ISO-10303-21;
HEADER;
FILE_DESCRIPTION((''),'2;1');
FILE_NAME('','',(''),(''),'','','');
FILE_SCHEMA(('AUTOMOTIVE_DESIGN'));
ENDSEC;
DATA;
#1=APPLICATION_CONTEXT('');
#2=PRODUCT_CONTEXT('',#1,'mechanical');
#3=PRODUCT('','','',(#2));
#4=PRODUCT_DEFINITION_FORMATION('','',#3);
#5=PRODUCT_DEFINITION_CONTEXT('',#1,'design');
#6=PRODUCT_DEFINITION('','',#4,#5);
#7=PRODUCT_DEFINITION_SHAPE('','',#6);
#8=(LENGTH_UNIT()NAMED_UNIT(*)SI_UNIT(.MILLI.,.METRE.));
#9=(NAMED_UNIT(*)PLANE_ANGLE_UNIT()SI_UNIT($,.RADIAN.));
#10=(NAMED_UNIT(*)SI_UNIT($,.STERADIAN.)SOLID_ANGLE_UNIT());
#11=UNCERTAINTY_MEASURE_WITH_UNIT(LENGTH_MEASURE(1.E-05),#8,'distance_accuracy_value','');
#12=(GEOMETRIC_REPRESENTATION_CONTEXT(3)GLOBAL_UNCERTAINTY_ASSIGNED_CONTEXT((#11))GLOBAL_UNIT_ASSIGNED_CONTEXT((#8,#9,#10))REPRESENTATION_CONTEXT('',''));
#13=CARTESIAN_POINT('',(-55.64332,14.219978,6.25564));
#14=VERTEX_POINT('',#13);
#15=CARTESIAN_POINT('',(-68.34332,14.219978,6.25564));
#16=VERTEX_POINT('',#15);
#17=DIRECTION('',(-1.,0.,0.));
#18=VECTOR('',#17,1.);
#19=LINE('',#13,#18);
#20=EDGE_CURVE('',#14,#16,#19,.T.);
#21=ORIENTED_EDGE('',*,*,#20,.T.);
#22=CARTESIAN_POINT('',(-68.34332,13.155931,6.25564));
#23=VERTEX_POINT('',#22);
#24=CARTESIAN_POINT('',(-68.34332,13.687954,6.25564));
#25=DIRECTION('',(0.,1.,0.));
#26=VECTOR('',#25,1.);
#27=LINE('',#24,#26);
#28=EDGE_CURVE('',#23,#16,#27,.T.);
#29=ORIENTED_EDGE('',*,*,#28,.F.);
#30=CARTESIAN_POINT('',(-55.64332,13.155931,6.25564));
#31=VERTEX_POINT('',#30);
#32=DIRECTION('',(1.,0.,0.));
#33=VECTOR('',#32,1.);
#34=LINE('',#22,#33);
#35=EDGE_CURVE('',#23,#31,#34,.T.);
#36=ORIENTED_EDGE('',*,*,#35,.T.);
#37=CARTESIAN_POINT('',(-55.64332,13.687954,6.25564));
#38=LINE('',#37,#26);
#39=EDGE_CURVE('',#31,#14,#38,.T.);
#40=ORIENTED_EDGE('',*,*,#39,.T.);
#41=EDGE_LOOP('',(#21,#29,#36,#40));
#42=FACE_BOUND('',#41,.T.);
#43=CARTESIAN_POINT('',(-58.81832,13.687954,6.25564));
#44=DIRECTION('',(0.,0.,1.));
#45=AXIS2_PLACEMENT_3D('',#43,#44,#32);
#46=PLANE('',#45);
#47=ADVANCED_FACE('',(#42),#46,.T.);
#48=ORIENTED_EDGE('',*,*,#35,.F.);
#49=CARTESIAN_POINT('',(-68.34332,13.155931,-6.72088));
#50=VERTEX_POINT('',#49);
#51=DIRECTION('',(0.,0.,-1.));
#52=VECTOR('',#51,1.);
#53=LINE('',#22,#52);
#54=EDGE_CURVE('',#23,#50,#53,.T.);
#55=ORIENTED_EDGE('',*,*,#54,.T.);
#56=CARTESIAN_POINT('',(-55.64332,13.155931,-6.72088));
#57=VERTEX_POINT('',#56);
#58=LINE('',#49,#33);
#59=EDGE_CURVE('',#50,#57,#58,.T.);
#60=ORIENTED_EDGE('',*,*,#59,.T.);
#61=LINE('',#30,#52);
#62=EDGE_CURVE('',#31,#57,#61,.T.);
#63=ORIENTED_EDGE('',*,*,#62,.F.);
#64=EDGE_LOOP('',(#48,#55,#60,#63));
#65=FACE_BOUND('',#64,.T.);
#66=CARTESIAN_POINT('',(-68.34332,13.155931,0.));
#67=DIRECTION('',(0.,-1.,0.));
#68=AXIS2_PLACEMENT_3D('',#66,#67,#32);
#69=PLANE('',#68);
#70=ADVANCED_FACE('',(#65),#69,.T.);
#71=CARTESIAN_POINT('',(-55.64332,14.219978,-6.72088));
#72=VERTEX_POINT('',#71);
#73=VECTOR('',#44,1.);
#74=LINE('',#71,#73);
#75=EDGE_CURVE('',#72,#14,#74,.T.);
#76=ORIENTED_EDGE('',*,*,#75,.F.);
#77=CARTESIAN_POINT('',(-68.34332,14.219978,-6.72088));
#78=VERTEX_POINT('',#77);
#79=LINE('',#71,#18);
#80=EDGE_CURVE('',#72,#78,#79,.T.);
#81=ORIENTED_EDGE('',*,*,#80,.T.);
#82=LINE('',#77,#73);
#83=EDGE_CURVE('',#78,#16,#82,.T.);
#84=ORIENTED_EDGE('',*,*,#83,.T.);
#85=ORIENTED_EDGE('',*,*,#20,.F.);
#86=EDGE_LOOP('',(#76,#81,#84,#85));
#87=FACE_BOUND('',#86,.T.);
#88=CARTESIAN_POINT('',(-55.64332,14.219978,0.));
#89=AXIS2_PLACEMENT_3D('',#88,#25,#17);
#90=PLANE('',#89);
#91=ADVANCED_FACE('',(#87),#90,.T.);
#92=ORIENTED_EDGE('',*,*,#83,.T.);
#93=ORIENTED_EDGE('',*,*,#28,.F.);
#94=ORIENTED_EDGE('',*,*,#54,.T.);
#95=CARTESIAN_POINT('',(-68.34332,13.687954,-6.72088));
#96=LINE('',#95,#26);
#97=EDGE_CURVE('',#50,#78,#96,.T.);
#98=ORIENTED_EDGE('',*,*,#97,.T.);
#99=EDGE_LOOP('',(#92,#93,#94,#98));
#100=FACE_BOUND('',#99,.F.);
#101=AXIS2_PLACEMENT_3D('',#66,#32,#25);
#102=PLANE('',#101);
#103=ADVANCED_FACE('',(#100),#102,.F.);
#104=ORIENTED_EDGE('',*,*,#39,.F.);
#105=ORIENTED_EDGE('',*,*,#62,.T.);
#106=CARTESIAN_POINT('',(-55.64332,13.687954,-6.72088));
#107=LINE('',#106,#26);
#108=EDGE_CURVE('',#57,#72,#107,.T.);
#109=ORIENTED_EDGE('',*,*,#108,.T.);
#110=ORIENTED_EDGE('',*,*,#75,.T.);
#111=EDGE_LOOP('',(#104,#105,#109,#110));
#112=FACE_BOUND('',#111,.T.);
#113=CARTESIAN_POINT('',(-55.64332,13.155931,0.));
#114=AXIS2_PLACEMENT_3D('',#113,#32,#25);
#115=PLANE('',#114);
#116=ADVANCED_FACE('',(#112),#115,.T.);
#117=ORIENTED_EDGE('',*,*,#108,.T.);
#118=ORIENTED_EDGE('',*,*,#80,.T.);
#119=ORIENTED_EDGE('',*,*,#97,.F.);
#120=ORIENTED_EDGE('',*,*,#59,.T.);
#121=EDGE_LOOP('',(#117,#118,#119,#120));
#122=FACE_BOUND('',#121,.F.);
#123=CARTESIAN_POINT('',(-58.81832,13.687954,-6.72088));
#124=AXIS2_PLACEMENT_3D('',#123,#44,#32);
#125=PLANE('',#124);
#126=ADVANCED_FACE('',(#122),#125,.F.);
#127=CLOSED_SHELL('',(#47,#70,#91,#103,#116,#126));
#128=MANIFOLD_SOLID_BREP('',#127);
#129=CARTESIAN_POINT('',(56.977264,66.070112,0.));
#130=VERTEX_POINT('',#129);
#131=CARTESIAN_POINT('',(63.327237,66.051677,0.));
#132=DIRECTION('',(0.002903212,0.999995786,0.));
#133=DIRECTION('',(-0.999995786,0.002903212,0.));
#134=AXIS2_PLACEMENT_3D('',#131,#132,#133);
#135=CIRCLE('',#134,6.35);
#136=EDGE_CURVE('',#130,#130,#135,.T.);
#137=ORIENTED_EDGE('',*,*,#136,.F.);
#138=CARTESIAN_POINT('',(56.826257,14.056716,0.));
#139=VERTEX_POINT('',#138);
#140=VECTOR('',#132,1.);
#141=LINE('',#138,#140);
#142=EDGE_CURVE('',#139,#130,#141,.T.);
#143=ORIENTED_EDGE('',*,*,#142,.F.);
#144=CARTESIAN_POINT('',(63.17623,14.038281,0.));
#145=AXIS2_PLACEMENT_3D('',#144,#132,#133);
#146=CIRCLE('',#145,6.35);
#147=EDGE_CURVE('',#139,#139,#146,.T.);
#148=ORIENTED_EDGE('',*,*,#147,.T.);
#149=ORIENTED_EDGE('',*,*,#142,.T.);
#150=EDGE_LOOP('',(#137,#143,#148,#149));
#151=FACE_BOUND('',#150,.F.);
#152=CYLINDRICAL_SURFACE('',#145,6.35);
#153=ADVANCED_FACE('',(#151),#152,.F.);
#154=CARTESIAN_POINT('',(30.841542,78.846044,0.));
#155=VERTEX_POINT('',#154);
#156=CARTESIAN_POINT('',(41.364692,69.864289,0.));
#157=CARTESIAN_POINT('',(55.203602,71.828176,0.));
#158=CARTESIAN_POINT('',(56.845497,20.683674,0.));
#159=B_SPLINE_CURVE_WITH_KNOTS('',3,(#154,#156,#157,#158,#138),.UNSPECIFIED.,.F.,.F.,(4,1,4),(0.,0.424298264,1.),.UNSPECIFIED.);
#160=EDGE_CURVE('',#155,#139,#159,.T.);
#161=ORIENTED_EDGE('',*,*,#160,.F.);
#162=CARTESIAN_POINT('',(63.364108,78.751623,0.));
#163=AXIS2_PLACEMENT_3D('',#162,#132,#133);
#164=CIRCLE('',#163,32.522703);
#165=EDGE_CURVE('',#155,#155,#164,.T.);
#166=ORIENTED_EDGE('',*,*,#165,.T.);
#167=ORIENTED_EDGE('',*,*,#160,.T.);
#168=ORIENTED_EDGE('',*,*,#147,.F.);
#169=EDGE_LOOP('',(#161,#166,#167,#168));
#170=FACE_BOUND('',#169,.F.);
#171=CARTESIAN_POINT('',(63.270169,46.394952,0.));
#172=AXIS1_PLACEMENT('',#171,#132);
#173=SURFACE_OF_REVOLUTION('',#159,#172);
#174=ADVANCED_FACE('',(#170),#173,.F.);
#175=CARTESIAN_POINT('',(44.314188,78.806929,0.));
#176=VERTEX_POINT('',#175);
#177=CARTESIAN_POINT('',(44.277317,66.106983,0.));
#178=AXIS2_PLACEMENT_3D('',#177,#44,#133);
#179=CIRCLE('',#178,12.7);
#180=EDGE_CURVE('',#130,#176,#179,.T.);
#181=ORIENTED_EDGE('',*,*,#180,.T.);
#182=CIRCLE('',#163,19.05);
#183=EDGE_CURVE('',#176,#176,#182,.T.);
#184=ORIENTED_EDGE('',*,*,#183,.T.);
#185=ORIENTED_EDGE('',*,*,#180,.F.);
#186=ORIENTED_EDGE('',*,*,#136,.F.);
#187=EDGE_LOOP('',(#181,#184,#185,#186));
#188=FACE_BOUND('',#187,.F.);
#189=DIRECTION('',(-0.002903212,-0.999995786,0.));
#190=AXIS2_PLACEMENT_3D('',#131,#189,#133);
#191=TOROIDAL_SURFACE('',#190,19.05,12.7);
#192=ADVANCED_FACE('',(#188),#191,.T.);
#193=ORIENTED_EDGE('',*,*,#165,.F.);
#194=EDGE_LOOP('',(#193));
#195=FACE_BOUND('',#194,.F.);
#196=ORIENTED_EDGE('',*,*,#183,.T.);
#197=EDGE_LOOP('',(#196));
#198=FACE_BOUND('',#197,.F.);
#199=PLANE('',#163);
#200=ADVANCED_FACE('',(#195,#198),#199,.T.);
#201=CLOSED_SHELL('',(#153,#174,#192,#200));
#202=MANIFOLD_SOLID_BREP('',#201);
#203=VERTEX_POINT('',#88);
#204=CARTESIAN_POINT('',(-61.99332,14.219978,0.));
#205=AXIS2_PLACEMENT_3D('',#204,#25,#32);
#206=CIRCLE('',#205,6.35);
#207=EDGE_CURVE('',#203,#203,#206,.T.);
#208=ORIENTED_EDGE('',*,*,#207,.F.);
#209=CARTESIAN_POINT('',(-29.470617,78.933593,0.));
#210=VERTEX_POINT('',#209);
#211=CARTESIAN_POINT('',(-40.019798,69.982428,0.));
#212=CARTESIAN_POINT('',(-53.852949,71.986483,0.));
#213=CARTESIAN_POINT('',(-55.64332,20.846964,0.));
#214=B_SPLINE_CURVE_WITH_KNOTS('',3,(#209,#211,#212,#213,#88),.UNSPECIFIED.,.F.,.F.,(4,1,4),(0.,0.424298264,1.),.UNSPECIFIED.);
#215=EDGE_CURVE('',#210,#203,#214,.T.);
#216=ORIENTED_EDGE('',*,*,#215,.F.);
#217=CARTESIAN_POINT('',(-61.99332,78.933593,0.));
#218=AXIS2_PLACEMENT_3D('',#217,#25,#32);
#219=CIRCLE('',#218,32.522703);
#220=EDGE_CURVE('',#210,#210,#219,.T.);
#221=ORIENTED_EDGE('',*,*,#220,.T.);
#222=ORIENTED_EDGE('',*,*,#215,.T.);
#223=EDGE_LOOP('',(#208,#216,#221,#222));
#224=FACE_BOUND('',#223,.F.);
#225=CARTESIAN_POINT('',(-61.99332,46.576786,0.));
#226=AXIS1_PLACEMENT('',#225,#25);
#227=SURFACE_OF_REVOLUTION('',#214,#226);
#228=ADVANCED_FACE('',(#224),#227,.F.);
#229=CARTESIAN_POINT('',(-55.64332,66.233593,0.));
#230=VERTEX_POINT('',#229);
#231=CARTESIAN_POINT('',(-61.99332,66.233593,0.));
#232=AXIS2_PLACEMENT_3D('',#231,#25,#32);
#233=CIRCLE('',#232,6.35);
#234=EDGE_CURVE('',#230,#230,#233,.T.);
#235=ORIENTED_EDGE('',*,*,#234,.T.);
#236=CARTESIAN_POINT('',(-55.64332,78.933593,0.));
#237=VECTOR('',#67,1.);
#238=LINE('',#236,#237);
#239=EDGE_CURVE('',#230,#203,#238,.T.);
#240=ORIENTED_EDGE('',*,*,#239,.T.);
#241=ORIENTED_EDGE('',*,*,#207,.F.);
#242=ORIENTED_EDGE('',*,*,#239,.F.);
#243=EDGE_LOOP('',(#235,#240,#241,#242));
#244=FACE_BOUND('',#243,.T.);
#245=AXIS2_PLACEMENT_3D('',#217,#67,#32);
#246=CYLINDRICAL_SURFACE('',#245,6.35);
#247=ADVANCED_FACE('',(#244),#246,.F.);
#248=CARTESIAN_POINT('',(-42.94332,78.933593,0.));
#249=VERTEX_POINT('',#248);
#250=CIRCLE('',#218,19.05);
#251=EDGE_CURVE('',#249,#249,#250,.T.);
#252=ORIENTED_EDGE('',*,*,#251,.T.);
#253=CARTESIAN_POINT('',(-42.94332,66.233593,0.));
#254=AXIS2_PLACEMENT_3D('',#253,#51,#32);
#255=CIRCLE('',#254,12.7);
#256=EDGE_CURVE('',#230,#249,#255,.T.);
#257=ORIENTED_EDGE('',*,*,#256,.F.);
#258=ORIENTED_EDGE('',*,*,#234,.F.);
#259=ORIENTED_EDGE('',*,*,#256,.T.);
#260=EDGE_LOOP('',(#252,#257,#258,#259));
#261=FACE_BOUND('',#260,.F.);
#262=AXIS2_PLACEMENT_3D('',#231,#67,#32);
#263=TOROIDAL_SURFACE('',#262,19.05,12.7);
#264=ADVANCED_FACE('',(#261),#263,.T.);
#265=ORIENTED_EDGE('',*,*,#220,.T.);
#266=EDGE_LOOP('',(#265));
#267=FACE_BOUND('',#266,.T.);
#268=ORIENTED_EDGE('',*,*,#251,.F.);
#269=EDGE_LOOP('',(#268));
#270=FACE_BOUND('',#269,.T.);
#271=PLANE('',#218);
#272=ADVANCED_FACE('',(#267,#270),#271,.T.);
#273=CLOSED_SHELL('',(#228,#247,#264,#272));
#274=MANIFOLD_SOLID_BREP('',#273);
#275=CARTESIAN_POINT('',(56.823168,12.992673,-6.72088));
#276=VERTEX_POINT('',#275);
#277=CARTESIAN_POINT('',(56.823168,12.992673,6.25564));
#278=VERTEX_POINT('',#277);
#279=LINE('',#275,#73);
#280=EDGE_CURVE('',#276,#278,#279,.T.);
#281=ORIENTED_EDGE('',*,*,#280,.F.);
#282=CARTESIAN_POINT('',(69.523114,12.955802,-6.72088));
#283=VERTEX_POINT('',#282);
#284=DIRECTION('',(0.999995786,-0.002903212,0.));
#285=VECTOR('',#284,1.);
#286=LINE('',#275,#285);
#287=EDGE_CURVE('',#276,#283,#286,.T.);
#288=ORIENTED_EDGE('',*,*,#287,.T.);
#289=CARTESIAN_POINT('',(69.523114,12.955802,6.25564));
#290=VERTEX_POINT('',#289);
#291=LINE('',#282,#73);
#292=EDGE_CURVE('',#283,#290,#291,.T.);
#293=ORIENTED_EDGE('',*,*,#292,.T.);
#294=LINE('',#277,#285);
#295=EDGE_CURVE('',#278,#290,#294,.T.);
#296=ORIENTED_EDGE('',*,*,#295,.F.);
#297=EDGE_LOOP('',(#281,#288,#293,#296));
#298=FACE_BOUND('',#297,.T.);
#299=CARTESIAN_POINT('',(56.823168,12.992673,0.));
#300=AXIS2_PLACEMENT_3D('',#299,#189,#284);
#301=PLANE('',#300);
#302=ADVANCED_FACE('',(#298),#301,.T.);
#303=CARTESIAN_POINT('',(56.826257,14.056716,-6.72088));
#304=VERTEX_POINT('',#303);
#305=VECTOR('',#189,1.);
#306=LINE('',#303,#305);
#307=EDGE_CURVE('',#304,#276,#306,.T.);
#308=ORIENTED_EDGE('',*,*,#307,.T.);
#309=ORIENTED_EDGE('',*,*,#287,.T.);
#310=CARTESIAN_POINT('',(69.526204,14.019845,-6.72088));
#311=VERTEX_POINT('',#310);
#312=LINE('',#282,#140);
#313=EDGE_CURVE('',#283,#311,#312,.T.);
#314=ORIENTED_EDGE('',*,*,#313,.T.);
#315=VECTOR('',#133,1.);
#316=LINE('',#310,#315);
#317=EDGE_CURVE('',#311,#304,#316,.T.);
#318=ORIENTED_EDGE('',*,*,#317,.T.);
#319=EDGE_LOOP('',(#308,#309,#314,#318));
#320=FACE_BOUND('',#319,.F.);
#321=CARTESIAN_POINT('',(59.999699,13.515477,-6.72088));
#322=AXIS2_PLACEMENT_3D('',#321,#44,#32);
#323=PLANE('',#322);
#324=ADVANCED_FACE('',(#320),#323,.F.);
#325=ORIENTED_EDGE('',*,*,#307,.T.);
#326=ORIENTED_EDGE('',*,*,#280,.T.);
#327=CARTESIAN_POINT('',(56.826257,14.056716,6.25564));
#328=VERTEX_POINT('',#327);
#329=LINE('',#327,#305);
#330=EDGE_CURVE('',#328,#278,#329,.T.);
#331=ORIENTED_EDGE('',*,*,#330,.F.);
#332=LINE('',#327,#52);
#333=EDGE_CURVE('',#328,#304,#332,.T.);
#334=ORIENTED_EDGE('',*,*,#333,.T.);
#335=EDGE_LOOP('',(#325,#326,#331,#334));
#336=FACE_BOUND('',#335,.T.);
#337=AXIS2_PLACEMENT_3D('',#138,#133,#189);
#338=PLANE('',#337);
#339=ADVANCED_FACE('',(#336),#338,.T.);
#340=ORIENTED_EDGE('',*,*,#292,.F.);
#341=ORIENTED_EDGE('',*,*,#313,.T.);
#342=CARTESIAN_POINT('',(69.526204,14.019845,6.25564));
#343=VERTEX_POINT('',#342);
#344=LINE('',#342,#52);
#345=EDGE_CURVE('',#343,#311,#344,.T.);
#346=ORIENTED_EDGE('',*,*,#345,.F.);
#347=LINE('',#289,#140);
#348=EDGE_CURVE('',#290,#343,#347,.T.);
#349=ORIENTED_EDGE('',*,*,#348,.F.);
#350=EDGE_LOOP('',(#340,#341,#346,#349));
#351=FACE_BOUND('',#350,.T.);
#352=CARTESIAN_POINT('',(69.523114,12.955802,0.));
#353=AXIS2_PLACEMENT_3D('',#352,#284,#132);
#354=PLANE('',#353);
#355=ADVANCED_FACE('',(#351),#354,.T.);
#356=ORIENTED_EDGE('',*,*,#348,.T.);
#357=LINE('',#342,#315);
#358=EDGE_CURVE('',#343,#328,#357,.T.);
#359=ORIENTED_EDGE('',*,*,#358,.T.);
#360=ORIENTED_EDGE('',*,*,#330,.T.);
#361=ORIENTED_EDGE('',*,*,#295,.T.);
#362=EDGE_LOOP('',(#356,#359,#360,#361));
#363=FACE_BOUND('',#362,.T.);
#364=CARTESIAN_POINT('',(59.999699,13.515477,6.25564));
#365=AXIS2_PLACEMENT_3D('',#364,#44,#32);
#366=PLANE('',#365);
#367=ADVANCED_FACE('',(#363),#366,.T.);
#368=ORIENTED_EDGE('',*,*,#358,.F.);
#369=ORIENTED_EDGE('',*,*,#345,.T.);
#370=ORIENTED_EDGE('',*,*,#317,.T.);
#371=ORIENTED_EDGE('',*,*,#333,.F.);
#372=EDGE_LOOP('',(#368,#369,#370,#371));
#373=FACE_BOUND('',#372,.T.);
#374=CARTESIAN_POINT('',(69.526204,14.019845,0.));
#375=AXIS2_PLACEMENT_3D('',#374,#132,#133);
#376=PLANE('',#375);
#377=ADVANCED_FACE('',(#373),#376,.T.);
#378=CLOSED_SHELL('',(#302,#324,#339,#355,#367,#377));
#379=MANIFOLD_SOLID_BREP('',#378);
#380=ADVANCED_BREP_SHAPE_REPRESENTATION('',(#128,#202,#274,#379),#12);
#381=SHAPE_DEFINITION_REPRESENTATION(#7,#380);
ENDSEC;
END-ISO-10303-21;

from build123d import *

# Parameters (mm, degrees)
F0_W          = 6.35
F0_H          = 1.0640472173
F3_DEPTH      = 6.25564
F3_DEPTH_BACK = 6.72088
F5_R          = 12.7
F5_2_R        = 12.7


# Not quite as in the source:
# - a feature of the source that left no trace in its solid (it failed there, or was rolled back) is left out


with BuildPart() as f1:
    # F0 (on Top) → F1 (revolve)
    with BuildSketch(Plane.XY):
        with BuildLine():
            add(Edge.make_bspline(
                [(-29.4706169434, 78.933593278), (-40.0197984199, 69.9824278464), (-53.8529486844, 71.986483099), (-55.6433195412, 20.8469636522), (-55.6433195412, 14.2199778929)],
                knots=[0, 0, 0, 0, 0.4242982639, 1, 1, 1, 1], degree=3))
            Line((-29.4706169434, 78.933593278), (-55.6433195412, 78.933593278))
            Line((-55.6433195412, 78.933593278), (-55.6433195412, 14.2199778929))
        make_face()
    revolve(axis=Axis((-61.9933195412, 46.5767855855, 0), (0, 1, 0)))

    # F5#2
    f5_2_edges = [f1.edges().sort_by_distance(p)[0] for p in [
        (-68.34332, 78.933593, 0),
    ]]
    fillet(f5_2_edges, radius=F5_2_R)


with BuildPart() as f3:
    # F0 (on Top) → F3 (new body, two sides)
    with BuildSketch(Plane.XY) as f3_sk:
        with Locations((-58.8183195412, 13.6879542842)):
            Rectangle(F0_W, F0_H)
        with Locations((-65.1683195412, 13.6879542842)):
            Rectangle(F0_W, F0_H)
    extrude(amount=F3_DEPTH)
    extrude(f3_sk.sketch, amount=-F3_DEPTH_BACK)


with BuildPart() as f3b:
    # F0 (on Top) → F3, piece 2 (new body, two sides)
    with BuildSketch(Plane.XY) as f3_2_sk:
        Polygon((63.1731412094, 12.9742378882), (63.1762303644, 14.0382806213), (56.8262571254, 14.0567160194), (56.8231679704, 12.9926732863), align=None)
        Polygon((69.5262036034, 14.0198452232), (63.1762303644, 14.0382806213), (63.1731412094, 12.9742378882), (69.5231144484, 12.9558024901), align=None)
    extrude(amount=F3_DEPTH)
    extrude(f3_2_sk.sketch, amount=-F3_DEPTH_BACK)


with BuildPart() as f4:
    # F0 (on Top) → F4 (revolve)
    with BuildSketch(Plane.XY):
        with BuildLine():
            add(Edge.make_bspline(
                [(30.8415421924, 78.8460435923), (41.3646920775, 69.8642893703), (55.2036022425, 71.8281756051), (56.845496672, 20.6836738504), (56.8262571254, 14.0567160194)],
                knots=[0, 0, 0, 0, 0.4242982639, 1, 1, 1, 1], degree=3))
            Line((56.8262571254, 14.0567160194), (57.0141344898, 78.77005868))
            Line((57.0141344898, 78.77005868), (30.8415421924, 78.8460435923))
        make_face()
    revolve(axis=Axis((63.2701690466, 46.3949519516, 0), (0.0029032123, 0.9999957857, 0)))

    # F5
    f5_edges = [f4.edges().sort_by_distance(p)[0] for p in [
        (69.714081, 78.733188, 0),
    ]]
    fillet(f5_edges, radius=F5_R)


solid = Compound([f1.part, f3.part, f3b.part, f4.part])
